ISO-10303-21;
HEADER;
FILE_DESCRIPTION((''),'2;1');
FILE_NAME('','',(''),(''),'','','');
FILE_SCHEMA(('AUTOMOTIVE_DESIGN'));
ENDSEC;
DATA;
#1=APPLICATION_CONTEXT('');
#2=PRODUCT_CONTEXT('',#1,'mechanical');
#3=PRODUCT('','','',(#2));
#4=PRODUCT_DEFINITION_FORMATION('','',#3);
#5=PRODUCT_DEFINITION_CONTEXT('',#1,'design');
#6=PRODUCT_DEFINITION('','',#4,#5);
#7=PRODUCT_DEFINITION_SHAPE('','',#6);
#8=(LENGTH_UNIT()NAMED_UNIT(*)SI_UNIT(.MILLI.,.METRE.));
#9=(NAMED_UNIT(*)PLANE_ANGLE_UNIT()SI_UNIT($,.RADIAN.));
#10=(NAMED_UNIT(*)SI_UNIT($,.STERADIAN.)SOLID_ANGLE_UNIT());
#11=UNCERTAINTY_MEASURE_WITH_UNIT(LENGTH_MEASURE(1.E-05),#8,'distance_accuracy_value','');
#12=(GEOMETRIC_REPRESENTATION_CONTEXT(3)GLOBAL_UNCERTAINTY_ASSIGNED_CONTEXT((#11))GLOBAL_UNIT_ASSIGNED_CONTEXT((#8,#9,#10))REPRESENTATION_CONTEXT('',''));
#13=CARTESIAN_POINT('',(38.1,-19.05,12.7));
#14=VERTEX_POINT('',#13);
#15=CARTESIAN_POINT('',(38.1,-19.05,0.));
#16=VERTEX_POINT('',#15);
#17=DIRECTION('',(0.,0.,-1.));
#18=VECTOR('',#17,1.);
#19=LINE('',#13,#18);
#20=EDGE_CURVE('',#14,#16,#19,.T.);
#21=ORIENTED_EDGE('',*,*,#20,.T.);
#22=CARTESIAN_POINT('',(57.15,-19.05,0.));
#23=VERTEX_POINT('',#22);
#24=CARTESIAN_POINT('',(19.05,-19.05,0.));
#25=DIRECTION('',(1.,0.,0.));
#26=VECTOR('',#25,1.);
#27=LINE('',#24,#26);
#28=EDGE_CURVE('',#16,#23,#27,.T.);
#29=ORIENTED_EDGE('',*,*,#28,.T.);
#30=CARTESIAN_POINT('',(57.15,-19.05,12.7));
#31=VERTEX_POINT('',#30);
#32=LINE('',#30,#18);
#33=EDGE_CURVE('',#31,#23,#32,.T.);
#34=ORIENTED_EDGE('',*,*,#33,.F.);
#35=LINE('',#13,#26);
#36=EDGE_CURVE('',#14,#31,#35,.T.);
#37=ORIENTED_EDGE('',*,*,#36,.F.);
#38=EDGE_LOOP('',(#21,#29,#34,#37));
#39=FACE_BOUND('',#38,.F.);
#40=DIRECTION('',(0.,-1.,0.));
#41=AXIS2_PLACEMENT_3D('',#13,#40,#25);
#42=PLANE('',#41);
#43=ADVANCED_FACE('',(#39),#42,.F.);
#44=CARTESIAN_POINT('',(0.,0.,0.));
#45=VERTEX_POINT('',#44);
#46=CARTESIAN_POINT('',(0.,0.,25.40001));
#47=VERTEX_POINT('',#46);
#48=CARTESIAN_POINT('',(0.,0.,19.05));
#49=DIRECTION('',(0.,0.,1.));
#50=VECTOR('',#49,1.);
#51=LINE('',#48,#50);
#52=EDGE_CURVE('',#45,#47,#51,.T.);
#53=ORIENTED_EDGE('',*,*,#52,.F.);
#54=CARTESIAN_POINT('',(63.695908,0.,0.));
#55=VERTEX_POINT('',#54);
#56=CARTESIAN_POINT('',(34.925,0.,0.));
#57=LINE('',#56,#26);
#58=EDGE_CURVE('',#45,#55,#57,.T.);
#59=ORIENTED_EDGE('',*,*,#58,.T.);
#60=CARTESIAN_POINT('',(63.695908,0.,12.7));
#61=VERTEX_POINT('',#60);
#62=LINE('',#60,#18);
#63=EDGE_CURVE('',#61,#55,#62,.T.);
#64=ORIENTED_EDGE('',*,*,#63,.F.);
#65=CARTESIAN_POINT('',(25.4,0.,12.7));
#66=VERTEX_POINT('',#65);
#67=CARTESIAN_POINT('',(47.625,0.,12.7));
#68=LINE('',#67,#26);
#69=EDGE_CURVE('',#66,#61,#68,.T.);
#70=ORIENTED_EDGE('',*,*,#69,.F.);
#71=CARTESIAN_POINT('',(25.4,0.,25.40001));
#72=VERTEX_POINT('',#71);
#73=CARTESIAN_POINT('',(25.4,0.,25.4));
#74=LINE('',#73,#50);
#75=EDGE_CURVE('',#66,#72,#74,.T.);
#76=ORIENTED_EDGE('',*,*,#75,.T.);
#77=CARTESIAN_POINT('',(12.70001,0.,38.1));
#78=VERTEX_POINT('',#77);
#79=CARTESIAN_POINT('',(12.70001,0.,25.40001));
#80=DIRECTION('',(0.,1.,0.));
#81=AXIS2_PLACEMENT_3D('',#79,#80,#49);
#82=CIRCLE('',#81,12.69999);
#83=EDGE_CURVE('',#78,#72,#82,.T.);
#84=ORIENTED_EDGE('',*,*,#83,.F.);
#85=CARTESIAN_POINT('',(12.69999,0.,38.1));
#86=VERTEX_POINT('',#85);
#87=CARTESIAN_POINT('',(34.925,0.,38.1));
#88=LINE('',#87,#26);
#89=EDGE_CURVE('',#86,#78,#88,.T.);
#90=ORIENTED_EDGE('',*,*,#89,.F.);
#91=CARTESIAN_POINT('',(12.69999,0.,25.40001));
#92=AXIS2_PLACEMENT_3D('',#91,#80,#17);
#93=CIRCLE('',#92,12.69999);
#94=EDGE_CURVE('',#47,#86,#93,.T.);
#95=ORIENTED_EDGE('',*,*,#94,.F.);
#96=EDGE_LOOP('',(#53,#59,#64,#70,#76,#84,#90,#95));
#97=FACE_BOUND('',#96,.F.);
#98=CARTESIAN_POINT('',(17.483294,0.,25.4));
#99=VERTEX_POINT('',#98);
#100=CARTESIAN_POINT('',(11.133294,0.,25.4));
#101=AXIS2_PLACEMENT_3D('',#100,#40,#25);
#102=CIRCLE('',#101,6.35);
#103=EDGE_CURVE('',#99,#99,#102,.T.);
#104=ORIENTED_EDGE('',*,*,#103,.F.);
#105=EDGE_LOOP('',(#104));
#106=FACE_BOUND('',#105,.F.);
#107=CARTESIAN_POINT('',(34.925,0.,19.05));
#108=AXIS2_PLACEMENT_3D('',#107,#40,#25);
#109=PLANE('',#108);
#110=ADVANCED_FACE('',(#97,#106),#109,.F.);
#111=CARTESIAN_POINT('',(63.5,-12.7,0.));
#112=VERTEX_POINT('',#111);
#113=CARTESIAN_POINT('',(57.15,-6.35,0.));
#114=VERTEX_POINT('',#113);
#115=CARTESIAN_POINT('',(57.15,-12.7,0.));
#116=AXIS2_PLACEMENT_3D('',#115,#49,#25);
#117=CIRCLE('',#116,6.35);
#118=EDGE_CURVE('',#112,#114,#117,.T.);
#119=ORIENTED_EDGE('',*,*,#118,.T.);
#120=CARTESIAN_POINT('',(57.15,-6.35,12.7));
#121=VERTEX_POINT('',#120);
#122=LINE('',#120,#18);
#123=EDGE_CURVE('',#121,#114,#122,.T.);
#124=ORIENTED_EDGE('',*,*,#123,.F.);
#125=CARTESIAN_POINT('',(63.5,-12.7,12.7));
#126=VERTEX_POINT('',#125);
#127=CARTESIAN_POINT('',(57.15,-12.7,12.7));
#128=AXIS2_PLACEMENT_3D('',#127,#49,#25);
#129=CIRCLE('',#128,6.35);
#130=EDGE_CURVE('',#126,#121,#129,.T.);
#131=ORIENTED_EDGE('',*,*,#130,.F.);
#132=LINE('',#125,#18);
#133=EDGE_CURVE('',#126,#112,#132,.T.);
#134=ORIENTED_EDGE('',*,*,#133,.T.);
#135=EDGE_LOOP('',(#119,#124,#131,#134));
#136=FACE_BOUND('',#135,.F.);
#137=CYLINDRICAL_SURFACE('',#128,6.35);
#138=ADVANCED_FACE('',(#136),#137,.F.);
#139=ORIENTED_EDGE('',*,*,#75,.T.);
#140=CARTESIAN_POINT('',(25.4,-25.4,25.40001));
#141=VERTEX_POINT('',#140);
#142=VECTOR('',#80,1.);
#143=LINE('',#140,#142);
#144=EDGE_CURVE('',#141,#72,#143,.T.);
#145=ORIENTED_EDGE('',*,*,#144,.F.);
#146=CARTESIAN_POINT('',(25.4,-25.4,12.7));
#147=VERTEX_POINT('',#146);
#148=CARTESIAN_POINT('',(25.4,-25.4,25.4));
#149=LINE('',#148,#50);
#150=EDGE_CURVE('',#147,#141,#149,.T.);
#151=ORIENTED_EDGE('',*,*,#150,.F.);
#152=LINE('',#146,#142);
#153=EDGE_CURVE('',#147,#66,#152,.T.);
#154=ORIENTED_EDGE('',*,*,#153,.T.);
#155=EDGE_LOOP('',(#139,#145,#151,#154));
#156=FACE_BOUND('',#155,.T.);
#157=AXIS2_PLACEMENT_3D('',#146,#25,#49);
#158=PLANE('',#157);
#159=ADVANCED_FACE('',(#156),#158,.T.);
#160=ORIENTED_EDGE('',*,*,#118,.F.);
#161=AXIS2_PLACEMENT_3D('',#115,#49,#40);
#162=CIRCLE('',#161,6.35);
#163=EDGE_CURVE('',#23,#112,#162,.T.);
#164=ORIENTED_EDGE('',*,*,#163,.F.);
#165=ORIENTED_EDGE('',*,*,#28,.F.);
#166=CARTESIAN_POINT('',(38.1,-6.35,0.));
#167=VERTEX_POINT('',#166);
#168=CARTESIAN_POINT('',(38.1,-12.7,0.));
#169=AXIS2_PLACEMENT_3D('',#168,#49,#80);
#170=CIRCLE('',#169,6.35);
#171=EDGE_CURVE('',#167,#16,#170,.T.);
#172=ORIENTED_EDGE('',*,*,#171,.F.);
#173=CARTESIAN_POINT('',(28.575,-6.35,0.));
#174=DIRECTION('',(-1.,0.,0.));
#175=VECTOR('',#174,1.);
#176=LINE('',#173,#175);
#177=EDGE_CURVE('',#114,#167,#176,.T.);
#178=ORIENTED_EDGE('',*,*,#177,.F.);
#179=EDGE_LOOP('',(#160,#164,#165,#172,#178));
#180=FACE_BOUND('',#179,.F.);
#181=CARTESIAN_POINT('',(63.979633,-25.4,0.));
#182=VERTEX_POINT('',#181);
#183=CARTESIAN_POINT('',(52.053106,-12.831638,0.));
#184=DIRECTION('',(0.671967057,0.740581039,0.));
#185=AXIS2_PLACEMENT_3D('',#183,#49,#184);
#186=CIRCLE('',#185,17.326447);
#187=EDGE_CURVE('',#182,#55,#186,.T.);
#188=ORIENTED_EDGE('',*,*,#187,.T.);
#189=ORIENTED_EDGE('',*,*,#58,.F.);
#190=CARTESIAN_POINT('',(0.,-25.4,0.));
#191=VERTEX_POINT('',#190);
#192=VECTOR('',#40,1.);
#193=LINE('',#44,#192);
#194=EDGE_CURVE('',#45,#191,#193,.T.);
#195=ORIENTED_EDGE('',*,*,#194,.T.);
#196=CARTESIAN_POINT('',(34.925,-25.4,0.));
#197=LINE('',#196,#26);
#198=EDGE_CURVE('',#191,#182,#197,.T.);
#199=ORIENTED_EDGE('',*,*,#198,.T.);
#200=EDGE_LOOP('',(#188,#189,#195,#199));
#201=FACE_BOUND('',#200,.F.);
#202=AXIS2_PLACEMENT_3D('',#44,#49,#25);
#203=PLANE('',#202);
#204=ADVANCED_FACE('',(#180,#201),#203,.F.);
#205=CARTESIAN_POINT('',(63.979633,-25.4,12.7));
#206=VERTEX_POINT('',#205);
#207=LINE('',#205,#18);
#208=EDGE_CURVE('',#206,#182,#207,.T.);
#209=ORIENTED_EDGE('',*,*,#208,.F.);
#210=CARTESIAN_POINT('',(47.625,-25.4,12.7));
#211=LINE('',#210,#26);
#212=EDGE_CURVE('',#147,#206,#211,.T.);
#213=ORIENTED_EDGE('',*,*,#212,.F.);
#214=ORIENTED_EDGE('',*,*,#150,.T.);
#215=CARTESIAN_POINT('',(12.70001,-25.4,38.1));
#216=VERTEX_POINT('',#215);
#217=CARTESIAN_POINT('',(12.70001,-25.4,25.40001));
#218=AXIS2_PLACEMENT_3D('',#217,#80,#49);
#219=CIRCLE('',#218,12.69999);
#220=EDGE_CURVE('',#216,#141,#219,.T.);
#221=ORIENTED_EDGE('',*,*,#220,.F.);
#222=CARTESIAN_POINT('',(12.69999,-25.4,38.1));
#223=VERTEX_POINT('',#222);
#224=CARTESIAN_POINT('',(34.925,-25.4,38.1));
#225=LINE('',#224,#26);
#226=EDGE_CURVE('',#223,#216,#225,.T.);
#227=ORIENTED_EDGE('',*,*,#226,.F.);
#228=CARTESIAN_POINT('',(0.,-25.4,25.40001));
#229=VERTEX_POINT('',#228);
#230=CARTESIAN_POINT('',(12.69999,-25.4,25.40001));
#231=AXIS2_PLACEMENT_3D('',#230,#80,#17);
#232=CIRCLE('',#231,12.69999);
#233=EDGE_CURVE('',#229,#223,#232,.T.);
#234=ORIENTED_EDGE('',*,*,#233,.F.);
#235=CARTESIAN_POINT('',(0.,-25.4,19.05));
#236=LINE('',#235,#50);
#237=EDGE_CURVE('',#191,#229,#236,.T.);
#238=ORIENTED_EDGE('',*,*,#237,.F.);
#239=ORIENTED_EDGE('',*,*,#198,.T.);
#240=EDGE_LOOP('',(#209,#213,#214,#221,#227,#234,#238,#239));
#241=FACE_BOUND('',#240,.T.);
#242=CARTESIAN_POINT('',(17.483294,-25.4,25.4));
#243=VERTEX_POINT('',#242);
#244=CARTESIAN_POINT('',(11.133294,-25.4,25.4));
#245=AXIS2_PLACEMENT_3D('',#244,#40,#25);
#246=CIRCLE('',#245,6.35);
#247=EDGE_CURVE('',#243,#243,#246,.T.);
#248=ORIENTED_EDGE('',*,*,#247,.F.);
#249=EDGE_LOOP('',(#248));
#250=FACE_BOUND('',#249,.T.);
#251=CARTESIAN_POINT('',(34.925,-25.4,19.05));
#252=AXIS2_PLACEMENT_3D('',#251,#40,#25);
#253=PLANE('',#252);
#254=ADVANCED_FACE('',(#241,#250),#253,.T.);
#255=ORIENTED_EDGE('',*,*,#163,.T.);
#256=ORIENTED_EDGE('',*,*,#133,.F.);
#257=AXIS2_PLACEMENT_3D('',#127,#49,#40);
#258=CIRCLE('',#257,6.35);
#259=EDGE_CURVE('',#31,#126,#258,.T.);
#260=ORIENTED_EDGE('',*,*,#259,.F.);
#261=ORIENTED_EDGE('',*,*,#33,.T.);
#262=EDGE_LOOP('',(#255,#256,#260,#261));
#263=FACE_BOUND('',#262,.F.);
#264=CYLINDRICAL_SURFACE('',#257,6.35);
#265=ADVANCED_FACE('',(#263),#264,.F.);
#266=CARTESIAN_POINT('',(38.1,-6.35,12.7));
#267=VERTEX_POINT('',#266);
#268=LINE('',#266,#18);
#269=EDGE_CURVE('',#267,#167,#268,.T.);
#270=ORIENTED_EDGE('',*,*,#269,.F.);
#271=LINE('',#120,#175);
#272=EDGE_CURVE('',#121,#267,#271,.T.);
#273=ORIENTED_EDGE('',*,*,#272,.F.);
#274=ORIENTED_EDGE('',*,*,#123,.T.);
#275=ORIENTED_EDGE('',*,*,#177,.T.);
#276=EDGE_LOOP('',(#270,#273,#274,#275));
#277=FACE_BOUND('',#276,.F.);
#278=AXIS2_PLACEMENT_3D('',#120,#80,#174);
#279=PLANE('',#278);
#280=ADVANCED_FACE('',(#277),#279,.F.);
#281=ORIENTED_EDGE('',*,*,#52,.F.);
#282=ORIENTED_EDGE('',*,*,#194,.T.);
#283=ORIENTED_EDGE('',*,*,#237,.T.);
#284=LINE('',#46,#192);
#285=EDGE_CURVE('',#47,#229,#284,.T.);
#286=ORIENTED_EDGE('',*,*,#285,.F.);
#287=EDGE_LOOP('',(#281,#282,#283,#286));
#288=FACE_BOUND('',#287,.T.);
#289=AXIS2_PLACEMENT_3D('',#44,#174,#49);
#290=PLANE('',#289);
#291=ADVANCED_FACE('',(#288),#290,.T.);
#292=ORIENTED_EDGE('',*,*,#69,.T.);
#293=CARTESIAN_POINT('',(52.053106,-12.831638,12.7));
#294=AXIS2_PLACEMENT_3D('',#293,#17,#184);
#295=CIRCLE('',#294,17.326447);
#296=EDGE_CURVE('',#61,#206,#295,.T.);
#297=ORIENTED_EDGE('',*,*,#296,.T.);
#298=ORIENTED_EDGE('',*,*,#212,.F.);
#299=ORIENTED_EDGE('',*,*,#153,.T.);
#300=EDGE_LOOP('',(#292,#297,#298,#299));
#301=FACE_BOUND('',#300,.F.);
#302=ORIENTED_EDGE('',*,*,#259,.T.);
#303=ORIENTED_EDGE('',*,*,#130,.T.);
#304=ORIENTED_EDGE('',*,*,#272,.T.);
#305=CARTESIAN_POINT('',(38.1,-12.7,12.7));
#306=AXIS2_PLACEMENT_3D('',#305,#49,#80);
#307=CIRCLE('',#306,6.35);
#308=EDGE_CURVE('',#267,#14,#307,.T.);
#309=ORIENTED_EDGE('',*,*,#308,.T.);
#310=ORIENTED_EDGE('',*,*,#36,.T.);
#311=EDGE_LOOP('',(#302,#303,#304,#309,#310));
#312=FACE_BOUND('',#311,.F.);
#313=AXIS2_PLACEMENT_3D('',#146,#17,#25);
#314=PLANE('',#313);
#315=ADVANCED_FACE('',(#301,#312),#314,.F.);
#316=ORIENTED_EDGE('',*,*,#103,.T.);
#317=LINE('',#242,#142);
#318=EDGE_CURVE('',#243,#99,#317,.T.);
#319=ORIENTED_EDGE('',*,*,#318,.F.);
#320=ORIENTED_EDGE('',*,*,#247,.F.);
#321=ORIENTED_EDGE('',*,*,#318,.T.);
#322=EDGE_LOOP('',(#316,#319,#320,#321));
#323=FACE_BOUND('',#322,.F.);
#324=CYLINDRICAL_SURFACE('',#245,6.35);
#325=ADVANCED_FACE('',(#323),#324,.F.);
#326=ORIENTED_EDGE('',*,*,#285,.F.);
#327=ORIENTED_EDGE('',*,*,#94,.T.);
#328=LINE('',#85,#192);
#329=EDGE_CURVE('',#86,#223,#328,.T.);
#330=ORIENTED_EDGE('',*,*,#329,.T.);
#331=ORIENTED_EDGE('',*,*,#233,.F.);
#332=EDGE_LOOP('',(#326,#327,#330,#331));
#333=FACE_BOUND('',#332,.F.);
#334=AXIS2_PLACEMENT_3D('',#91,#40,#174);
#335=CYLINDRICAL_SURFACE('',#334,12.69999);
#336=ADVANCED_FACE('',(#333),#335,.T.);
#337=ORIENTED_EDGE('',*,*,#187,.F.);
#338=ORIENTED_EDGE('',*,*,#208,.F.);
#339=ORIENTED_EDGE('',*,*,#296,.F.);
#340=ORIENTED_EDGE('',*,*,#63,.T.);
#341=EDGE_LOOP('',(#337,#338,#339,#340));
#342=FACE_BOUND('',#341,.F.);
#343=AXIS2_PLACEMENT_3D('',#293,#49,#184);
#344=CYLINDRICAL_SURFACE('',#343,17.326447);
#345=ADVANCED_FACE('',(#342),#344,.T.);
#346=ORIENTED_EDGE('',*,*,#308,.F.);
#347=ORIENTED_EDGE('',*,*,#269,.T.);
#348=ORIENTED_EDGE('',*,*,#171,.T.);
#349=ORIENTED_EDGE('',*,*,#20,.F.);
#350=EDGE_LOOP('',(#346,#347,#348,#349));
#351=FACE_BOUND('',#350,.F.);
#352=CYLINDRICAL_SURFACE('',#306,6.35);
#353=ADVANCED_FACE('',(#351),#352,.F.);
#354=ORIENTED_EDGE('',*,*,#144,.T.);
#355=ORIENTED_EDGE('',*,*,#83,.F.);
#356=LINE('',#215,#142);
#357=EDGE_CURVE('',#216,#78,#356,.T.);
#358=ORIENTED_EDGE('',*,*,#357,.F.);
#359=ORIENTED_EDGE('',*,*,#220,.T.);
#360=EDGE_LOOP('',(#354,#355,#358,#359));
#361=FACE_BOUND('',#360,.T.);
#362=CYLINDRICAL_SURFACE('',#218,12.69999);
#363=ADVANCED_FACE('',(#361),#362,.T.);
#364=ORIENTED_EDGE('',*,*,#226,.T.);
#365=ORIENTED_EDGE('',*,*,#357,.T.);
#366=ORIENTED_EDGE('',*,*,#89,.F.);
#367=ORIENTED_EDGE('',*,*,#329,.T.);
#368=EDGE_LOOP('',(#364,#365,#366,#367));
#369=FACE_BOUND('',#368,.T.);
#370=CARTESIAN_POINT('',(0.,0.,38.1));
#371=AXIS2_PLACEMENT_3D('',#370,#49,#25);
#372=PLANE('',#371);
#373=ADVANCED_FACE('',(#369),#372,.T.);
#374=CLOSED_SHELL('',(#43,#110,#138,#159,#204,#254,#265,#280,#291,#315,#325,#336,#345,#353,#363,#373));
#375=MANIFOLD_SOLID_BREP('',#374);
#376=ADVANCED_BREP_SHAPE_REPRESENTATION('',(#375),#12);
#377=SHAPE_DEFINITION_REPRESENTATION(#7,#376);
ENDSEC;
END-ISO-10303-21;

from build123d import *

# Parameters (mm, degrees)
F0_W      = 69.85
F0_H      = 38.1
F1_DEPTH  = 25.4
F2_W      = 44.45
F2_H      = 25.4
F3_DEPTH  = 25.4
F4_R      = 12.69999
F5_R      = 6.35
F6_DEPTH  = 25.4
F8_DEPTH  = 50.8
F10_DEPTH = 50.8


# Not quite as in the source:
# - a fillet or chamfer is up to 0.001 mm smaller than in the source, because OpenCascade refuses the exact size


with BuildPart() as f1:
    # F0 (on Front) → F1 (new body)
    with BuildSketch(Plane.XZ):
        with Locations((34.925, 19.05)):
            Rectangle(F0_W, F0_H)
    extrude(amount=F1_DEPTH)

    # F2 (on face) → F3 (cut)
    with BuildSketch(Plane.XZ.offset(25.4)):
        with Locations((47.625, 25.4)):
            Rectangle(F2_W, F2_H)
    extrude(amount=-F3_DEPTH, mode=Mode.SUBTRACT)

    # F4 (radius 12.7 in the source; OpenCascade refuses exactly that, so slightly less here)
    f4_edges = [f1.edges().sort_by_distance(p)[0] for p in [
        (25.4, -12.7, 38.1),
        (0, -12.7, 38.1),
    ]]
    fillet(f4_edges, radius=F4_R)

    # F5 (on face) → F6 (cut)
    with BuildSketch(Plane.XZ.offset(25.4)):
        with Locations((11.1332936212, 25.4)):
            Circle(F5_R)
    extrude(amount=-F6_DEPTH, mode=Mode.SUBTRACT)

    # F7 (on face) → F8 (cut)
    with BuildSketch(Plane.XY.offset(12.7)):
        with BuildLine():
            ThreePointArc((38.1, -19.05), (42.5901280605, -17.1901280605), (44.45, -12.7))
            ThreePointArc((44.45, -12.7), (42.5901280605, -8.2098719395), (38.1, -6.35))
            ThreePointArc((38.1, -6.35), (31.75, -12.7), (38.1, -19.05))
        make_face()
        with BuildLine():
            ThreePointArc((38.1, -6.35), (42.5901280605, -8.2098719395), (44.45, -12.7))
            ThreePointArc((44.45, -12.7), (42.5901280605, -17.1901280605), (38.1, -19.05))
            Line((38.1, -19.05), (57.15, -19.05))
            ThreePointArc((57.15, -19.05), (50.8, -12.7), (57.15, -6.35))
            Line((57.15, -6.35), (38.1, -6.35))
        make_face()
        with BuildLine():
            ThreePointArc((63.5, -12.7), (61.6401280605, -8.2098719395), (57.15, -6.35))
            ThreePointArc((57.15, -6.35), (50.8, -12.7), (57.15, -19.05))
            ThreePointArc((57.15, -19.05), (61.6401280605, -17.1901280605), (63.5, -12.7))
        make_face()
    extrude(amount=-F8_DEPTH, mode=Mode.SUBTRACT)

    # F9 (on face) → F10 (cut)
    with BuildSketch(Plane.XY.offset(12.7)):
        with BuildLine():
            ThreePointArc((63.6959075928, 0), (69.3784721841, -12.6381087117), (63.9796331525, -25.4))
            Line((63.9796331525, -25.4), (69.85, -25.4))
            Line((69.85, -25.4), (69.85, 0))
            Line((69.85, 0), (63.6959075928, 0))
        make_face()
    extrude(amount=-F10_DEPTH, mode=Mode.SUBTRACT)


solid = f1.part
